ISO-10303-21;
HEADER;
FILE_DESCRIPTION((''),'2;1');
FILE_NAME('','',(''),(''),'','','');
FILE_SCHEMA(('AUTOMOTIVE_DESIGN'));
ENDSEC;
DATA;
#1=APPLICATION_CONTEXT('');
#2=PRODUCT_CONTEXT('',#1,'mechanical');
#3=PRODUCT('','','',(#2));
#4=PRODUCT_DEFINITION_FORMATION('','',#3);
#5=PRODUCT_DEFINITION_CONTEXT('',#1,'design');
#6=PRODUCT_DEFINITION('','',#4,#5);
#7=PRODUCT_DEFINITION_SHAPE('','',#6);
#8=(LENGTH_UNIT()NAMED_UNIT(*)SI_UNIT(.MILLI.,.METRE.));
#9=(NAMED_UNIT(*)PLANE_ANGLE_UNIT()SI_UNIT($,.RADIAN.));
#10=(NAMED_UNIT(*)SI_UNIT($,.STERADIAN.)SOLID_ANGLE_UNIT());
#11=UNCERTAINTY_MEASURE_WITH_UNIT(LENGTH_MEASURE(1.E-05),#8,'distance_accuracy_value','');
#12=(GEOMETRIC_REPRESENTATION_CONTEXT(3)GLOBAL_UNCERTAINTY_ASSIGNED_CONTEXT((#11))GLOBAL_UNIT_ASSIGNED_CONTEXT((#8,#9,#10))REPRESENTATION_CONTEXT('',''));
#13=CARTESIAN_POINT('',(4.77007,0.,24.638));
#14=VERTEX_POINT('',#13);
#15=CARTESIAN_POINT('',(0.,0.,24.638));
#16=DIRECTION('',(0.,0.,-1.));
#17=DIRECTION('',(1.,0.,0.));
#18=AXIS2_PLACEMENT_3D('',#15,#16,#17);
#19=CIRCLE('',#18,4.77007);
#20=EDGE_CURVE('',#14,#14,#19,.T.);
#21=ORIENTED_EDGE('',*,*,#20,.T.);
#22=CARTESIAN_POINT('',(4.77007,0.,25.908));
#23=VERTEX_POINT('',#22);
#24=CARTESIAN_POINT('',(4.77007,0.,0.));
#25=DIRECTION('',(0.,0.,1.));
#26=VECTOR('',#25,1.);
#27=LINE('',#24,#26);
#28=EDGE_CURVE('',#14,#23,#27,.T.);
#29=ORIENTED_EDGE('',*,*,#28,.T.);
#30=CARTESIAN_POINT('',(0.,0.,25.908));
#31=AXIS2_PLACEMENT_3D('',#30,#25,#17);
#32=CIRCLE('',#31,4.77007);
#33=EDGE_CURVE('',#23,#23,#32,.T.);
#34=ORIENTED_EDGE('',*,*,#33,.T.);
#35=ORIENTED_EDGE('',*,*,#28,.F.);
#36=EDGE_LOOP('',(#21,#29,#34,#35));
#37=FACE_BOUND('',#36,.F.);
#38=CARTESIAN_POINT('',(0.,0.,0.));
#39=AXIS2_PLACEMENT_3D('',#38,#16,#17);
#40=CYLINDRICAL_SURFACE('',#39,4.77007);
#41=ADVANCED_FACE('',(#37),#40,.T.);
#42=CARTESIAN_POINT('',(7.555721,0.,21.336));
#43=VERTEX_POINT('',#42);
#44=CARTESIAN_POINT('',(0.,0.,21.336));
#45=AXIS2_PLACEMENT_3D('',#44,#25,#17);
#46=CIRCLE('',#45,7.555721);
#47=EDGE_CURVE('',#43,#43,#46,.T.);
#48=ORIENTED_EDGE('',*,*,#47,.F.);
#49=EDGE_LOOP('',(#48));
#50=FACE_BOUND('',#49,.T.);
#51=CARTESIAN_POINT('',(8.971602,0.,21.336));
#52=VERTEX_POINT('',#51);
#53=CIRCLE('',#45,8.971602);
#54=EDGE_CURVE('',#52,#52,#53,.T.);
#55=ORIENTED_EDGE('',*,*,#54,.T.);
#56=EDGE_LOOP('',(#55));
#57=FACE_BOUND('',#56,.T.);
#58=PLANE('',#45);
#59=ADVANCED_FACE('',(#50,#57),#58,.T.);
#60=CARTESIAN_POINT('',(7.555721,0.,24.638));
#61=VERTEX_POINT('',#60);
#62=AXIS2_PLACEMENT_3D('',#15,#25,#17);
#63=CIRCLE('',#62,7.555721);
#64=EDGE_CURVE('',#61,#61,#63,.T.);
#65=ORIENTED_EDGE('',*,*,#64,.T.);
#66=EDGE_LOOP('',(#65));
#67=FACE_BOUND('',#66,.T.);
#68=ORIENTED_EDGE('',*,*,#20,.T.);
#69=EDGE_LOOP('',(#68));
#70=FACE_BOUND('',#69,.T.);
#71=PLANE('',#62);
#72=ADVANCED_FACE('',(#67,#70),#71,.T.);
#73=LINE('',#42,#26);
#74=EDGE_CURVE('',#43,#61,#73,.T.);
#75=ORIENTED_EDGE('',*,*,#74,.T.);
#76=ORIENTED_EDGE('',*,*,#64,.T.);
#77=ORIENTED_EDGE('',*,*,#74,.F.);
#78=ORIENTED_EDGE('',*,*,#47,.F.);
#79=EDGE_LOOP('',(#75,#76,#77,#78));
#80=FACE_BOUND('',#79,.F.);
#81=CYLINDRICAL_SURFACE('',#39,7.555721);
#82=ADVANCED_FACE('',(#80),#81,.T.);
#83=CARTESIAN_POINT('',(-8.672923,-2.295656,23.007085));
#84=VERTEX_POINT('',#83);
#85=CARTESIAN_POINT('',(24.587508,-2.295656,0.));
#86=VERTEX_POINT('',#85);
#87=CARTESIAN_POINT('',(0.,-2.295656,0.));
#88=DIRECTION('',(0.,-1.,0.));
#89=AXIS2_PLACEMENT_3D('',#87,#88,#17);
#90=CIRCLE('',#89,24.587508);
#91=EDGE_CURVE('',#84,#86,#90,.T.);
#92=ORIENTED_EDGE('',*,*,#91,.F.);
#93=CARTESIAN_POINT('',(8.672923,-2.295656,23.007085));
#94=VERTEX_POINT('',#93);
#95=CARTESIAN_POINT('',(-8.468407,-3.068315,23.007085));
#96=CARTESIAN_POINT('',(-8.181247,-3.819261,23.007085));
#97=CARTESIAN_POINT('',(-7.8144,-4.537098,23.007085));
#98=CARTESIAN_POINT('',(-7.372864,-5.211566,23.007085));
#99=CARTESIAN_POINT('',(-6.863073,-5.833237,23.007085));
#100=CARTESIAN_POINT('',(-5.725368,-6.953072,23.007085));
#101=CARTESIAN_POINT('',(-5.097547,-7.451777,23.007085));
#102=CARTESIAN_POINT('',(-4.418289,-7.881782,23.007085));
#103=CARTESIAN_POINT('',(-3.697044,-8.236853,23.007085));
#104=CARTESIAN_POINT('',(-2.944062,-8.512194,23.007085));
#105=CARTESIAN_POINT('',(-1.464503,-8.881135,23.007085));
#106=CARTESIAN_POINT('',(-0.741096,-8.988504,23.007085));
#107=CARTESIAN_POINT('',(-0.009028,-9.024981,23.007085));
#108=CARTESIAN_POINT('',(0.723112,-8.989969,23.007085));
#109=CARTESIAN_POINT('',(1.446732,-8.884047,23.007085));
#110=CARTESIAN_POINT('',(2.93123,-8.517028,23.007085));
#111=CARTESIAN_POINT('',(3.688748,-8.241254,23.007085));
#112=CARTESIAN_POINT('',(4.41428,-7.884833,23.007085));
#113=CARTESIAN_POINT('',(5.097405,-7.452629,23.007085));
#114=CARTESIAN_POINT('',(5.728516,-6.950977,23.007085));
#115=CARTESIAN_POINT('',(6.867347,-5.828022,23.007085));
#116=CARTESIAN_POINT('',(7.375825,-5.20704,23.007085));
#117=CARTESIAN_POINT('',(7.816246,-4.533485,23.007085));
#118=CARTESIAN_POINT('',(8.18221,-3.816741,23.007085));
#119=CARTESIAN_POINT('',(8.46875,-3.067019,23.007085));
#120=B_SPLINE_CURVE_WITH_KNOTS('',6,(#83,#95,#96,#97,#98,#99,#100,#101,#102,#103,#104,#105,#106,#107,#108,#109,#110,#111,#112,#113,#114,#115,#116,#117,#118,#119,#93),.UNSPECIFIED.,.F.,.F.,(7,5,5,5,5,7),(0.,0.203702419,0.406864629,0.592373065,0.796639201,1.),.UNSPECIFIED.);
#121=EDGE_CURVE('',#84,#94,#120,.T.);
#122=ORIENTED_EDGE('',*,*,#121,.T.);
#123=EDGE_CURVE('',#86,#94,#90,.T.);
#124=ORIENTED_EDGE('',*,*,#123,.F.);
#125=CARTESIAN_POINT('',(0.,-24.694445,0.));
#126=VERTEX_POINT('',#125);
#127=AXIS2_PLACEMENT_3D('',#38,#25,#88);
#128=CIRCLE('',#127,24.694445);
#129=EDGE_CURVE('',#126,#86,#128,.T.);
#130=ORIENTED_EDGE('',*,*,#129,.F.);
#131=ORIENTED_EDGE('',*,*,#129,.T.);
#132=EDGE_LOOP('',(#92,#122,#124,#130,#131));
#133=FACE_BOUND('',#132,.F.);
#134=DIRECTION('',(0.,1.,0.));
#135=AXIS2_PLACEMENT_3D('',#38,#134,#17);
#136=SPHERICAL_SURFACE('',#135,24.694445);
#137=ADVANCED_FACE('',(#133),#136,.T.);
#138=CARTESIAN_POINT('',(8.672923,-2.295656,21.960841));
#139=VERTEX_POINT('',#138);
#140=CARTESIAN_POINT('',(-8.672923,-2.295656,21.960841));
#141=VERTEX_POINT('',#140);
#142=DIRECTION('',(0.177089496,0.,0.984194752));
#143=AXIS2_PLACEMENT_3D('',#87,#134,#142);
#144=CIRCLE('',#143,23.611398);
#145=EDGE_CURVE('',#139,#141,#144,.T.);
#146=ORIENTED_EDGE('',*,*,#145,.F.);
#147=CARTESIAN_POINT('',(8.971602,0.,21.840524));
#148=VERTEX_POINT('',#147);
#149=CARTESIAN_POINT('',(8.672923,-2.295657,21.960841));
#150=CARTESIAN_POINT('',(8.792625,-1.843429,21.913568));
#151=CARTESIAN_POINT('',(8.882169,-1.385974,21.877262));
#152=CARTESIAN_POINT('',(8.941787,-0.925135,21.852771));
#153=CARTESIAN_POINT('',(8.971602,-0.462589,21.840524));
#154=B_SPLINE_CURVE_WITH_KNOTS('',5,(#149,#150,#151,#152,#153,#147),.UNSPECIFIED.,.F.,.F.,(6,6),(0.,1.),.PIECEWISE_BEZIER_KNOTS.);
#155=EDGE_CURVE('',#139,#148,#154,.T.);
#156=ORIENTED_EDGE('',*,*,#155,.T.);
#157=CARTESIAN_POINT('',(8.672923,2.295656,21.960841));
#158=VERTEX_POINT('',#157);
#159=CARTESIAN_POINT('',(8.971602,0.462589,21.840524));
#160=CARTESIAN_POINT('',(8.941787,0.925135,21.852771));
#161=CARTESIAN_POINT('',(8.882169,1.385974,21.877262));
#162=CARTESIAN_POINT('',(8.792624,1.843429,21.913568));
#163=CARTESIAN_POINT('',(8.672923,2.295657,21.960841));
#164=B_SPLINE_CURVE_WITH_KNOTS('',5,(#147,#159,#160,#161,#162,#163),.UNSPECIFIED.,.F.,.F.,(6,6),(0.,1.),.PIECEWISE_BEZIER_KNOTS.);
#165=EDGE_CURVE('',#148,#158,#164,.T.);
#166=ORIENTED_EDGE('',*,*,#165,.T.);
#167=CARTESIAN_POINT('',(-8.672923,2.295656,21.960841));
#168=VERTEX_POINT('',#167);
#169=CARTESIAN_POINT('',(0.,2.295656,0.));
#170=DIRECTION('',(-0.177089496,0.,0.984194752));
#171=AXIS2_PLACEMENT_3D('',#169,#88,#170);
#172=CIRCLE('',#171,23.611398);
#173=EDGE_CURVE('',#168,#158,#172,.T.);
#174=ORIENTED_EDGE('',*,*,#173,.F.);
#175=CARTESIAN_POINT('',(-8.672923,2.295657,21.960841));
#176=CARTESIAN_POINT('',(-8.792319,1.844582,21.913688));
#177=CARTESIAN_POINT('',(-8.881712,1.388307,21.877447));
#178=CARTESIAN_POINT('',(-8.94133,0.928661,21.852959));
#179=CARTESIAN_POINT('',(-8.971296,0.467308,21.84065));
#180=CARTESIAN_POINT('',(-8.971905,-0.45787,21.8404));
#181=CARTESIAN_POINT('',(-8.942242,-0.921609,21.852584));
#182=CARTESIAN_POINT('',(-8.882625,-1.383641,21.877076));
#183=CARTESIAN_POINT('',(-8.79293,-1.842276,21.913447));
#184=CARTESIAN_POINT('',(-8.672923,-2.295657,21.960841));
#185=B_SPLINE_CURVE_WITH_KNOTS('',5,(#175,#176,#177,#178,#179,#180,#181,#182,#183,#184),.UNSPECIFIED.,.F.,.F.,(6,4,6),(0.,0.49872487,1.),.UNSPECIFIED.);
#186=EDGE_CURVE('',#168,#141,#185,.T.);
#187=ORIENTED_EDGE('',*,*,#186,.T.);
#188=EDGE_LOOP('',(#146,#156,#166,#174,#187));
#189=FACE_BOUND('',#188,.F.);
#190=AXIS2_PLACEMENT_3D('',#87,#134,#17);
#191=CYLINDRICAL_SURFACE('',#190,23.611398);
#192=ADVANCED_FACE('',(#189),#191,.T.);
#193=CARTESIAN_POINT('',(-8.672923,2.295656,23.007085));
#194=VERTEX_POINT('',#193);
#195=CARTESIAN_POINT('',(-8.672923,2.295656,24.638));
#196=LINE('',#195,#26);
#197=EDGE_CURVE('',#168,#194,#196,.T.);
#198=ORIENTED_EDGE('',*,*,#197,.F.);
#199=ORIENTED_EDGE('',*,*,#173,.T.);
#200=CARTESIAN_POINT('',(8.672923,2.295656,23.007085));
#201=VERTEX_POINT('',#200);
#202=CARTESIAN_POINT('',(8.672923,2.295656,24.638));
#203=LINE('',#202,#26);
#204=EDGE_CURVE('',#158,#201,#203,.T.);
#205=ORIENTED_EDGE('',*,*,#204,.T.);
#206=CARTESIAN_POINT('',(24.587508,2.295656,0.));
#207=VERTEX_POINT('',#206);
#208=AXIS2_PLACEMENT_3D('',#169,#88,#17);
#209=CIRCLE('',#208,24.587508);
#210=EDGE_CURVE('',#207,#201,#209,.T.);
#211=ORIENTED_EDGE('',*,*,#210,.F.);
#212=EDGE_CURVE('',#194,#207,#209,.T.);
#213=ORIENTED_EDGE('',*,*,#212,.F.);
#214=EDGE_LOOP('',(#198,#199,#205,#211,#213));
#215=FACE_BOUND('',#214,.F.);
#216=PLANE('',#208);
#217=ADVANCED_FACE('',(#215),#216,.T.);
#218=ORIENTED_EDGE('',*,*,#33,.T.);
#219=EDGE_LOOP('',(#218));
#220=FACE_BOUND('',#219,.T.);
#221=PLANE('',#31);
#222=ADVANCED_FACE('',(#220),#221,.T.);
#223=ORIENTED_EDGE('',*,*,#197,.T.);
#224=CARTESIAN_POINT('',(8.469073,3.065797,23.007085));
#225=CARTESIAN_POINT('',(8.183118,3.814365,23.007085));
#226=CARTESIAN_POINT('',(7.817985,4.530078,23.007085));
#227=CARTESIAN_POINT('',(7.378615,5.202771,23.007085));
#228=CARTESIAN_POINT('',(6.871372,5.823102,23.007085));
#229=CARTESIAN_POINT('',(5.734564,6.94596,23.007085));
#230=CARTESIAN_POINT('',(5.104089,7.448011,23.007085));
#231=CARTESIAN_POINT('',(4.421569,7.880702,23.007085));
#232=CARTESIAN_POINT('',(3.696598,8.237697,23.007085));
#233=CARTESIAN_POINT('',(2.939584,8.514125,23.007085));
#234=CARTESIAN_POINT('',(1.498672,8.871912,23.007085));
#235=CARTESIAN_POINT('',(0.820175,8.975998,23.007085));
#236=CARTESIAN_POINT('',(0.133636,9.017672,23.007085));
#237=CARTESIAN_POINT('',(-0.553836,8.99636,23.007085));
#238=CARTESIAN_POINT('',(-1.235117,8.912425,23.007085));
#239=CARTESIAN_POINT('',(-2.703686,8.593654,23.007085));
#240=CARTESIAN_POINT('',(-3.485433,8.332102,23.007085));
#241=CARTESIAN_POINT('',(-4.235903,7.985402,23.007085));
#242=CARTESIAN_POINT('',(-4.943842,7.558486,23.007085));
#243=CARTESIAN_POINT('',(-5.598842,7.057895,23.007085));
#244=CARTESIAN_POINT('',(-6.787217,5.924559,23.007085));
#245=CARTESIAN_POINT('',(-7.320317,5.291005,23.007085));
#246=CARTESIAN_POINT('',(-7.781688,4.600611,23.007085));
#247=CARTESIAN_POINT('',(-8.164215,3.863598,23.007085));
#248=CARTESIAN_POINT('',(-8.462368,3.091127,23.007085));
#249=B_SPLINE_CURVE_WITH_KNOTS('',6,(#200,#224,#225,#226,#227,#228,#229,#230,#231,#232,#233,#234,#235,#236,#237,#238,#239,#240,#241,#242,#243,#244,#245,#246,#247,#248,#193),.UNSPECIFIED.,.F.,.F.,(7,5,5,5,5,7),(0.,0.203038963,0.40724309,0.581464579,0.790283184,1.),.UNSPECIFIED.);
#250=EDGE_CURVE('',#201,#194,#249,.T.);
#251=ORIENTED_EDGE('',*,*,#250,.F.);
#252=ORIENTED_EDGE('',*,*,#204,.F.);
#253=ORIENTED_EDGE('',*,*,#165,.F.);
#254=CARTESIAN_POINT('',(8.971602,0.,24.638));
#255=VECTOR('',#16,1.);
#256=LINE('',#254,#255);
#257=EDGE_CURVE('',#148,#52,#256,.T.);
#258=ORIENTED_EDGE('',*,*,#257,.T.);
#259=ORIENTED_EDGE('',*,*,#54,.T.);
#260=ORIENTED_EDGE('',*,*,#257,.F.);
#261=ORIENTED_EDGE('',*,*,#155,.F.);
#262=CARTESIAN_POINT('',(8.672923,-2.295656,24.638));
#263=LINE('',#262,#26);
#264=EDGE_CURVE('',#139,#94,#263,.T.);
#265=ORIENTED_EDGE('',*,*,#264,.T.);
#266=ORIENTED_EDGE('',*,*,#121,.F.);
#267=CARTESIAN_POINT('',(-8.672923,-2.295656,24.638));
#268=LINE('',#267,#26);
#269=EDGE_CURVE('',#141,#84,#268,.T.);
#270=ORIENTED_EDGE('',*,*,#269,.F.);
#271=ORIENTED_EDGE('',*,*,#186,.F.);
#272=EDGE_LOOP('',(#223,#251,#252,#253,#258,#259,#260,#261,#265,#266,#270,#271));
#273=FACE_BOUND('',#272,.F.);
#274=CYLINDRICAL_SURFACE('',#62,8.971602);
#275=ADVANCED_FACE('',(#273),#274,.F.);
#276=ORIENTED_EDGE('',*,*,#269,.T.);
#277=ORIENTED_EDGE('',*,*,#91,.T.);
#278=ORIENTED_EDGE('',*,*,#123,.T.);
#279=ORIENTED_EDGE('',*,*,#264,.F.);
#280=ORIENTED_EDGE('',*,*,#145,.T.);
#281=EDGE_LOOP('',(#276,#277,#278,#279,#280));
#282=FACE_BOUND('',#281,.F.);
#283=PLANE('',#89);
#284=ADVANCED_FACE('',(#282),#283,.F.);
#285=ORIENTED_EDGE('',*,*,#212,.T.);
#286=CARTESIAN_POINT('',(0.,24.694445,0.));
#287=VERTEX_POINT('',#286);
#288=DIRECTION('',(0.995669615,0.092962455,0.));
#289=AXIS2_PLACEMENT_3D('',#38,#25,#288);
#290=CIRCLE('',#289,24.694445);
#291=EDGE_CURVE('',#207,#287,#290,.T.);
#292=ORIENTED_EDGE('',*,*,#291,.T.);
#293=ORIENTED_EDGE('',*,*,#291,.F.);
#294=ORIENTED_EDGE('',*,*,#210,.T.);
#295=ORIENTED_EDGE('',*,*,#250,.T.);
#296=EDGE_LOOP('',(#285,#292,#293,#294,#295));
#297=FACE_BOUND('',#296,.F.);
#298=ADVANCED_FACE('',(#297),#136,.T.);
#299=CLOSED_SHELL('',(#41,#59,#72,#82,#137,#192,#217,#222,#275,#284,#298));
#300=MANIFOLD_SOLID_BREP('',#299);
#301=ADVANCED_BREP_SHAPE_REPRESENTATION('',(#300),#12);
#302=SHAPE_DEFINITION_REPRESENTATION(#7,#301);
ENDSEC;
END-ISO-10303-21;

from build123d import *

# Parameters (mm, degrees)
F3_R     = 4.7700695271
F4_DEPTH = 25.908
F5_R     = 7.5557207763
F6_DEPTH = 24.638
F7_R     = 8.9716016728
F7_R_2   = 7.5557207763
F8_DEPTH = 3.302


# Not quite as in the source:
# - a feature names something its author has since deleted; it is built from what else it names


with BuildPart() as f2:
    # F0 (on Top) → F2 (revolve)
    with BuildSketch(Plane.XY):
        with BuildLine():
            Line((0, 24.6944446117), (0, -24.6944446117))
            ThreePointArc((0, -24.6944446117), (16.6301779866, -18.2552122643), (24.5875081551, -2.2956562028))
            Line((24.5875081551, -2.2956562028), (23.6113984138, -2.2956562028))
            Line((23.6113984138, -2.2956562028), (23.6113984138, 2.2956562028))
            Line((23.6113984138, 2.2956562028), (24.5875081551, 2.2956562028))
            ThreePointArc((24.5875081551, 2.2956562028), (16.6301779866, 18.2552122643), (0, 24.6944446117))
        make_face()
    revolve(axis=Axis((0, 0.329259783, 0), (0, -1, 0)))

    # F3 (on Top) → F4 (join)
    with BuildSketch(Plane.XY):
        Circle(F3_R)
    extrude(amount=F4_DEPTH)

    # F5 (on Top) → F6 (join)
    with BuildSketch(Plane.XY):
        Circle(F5_R)
    extrude(amount=F6_DEPTH)

    # F7 (on face) → F8 (cut)
    with BuildSketch(Plane.XY.offset(24.638)):
        Circle(F7_R)
        Circle(F7_R_2, mode=Mode.SUBTRACT)
    extrude(amount=-F8_DEPTH, mode=Mode.SUBTRACT)


solid = f2.part
